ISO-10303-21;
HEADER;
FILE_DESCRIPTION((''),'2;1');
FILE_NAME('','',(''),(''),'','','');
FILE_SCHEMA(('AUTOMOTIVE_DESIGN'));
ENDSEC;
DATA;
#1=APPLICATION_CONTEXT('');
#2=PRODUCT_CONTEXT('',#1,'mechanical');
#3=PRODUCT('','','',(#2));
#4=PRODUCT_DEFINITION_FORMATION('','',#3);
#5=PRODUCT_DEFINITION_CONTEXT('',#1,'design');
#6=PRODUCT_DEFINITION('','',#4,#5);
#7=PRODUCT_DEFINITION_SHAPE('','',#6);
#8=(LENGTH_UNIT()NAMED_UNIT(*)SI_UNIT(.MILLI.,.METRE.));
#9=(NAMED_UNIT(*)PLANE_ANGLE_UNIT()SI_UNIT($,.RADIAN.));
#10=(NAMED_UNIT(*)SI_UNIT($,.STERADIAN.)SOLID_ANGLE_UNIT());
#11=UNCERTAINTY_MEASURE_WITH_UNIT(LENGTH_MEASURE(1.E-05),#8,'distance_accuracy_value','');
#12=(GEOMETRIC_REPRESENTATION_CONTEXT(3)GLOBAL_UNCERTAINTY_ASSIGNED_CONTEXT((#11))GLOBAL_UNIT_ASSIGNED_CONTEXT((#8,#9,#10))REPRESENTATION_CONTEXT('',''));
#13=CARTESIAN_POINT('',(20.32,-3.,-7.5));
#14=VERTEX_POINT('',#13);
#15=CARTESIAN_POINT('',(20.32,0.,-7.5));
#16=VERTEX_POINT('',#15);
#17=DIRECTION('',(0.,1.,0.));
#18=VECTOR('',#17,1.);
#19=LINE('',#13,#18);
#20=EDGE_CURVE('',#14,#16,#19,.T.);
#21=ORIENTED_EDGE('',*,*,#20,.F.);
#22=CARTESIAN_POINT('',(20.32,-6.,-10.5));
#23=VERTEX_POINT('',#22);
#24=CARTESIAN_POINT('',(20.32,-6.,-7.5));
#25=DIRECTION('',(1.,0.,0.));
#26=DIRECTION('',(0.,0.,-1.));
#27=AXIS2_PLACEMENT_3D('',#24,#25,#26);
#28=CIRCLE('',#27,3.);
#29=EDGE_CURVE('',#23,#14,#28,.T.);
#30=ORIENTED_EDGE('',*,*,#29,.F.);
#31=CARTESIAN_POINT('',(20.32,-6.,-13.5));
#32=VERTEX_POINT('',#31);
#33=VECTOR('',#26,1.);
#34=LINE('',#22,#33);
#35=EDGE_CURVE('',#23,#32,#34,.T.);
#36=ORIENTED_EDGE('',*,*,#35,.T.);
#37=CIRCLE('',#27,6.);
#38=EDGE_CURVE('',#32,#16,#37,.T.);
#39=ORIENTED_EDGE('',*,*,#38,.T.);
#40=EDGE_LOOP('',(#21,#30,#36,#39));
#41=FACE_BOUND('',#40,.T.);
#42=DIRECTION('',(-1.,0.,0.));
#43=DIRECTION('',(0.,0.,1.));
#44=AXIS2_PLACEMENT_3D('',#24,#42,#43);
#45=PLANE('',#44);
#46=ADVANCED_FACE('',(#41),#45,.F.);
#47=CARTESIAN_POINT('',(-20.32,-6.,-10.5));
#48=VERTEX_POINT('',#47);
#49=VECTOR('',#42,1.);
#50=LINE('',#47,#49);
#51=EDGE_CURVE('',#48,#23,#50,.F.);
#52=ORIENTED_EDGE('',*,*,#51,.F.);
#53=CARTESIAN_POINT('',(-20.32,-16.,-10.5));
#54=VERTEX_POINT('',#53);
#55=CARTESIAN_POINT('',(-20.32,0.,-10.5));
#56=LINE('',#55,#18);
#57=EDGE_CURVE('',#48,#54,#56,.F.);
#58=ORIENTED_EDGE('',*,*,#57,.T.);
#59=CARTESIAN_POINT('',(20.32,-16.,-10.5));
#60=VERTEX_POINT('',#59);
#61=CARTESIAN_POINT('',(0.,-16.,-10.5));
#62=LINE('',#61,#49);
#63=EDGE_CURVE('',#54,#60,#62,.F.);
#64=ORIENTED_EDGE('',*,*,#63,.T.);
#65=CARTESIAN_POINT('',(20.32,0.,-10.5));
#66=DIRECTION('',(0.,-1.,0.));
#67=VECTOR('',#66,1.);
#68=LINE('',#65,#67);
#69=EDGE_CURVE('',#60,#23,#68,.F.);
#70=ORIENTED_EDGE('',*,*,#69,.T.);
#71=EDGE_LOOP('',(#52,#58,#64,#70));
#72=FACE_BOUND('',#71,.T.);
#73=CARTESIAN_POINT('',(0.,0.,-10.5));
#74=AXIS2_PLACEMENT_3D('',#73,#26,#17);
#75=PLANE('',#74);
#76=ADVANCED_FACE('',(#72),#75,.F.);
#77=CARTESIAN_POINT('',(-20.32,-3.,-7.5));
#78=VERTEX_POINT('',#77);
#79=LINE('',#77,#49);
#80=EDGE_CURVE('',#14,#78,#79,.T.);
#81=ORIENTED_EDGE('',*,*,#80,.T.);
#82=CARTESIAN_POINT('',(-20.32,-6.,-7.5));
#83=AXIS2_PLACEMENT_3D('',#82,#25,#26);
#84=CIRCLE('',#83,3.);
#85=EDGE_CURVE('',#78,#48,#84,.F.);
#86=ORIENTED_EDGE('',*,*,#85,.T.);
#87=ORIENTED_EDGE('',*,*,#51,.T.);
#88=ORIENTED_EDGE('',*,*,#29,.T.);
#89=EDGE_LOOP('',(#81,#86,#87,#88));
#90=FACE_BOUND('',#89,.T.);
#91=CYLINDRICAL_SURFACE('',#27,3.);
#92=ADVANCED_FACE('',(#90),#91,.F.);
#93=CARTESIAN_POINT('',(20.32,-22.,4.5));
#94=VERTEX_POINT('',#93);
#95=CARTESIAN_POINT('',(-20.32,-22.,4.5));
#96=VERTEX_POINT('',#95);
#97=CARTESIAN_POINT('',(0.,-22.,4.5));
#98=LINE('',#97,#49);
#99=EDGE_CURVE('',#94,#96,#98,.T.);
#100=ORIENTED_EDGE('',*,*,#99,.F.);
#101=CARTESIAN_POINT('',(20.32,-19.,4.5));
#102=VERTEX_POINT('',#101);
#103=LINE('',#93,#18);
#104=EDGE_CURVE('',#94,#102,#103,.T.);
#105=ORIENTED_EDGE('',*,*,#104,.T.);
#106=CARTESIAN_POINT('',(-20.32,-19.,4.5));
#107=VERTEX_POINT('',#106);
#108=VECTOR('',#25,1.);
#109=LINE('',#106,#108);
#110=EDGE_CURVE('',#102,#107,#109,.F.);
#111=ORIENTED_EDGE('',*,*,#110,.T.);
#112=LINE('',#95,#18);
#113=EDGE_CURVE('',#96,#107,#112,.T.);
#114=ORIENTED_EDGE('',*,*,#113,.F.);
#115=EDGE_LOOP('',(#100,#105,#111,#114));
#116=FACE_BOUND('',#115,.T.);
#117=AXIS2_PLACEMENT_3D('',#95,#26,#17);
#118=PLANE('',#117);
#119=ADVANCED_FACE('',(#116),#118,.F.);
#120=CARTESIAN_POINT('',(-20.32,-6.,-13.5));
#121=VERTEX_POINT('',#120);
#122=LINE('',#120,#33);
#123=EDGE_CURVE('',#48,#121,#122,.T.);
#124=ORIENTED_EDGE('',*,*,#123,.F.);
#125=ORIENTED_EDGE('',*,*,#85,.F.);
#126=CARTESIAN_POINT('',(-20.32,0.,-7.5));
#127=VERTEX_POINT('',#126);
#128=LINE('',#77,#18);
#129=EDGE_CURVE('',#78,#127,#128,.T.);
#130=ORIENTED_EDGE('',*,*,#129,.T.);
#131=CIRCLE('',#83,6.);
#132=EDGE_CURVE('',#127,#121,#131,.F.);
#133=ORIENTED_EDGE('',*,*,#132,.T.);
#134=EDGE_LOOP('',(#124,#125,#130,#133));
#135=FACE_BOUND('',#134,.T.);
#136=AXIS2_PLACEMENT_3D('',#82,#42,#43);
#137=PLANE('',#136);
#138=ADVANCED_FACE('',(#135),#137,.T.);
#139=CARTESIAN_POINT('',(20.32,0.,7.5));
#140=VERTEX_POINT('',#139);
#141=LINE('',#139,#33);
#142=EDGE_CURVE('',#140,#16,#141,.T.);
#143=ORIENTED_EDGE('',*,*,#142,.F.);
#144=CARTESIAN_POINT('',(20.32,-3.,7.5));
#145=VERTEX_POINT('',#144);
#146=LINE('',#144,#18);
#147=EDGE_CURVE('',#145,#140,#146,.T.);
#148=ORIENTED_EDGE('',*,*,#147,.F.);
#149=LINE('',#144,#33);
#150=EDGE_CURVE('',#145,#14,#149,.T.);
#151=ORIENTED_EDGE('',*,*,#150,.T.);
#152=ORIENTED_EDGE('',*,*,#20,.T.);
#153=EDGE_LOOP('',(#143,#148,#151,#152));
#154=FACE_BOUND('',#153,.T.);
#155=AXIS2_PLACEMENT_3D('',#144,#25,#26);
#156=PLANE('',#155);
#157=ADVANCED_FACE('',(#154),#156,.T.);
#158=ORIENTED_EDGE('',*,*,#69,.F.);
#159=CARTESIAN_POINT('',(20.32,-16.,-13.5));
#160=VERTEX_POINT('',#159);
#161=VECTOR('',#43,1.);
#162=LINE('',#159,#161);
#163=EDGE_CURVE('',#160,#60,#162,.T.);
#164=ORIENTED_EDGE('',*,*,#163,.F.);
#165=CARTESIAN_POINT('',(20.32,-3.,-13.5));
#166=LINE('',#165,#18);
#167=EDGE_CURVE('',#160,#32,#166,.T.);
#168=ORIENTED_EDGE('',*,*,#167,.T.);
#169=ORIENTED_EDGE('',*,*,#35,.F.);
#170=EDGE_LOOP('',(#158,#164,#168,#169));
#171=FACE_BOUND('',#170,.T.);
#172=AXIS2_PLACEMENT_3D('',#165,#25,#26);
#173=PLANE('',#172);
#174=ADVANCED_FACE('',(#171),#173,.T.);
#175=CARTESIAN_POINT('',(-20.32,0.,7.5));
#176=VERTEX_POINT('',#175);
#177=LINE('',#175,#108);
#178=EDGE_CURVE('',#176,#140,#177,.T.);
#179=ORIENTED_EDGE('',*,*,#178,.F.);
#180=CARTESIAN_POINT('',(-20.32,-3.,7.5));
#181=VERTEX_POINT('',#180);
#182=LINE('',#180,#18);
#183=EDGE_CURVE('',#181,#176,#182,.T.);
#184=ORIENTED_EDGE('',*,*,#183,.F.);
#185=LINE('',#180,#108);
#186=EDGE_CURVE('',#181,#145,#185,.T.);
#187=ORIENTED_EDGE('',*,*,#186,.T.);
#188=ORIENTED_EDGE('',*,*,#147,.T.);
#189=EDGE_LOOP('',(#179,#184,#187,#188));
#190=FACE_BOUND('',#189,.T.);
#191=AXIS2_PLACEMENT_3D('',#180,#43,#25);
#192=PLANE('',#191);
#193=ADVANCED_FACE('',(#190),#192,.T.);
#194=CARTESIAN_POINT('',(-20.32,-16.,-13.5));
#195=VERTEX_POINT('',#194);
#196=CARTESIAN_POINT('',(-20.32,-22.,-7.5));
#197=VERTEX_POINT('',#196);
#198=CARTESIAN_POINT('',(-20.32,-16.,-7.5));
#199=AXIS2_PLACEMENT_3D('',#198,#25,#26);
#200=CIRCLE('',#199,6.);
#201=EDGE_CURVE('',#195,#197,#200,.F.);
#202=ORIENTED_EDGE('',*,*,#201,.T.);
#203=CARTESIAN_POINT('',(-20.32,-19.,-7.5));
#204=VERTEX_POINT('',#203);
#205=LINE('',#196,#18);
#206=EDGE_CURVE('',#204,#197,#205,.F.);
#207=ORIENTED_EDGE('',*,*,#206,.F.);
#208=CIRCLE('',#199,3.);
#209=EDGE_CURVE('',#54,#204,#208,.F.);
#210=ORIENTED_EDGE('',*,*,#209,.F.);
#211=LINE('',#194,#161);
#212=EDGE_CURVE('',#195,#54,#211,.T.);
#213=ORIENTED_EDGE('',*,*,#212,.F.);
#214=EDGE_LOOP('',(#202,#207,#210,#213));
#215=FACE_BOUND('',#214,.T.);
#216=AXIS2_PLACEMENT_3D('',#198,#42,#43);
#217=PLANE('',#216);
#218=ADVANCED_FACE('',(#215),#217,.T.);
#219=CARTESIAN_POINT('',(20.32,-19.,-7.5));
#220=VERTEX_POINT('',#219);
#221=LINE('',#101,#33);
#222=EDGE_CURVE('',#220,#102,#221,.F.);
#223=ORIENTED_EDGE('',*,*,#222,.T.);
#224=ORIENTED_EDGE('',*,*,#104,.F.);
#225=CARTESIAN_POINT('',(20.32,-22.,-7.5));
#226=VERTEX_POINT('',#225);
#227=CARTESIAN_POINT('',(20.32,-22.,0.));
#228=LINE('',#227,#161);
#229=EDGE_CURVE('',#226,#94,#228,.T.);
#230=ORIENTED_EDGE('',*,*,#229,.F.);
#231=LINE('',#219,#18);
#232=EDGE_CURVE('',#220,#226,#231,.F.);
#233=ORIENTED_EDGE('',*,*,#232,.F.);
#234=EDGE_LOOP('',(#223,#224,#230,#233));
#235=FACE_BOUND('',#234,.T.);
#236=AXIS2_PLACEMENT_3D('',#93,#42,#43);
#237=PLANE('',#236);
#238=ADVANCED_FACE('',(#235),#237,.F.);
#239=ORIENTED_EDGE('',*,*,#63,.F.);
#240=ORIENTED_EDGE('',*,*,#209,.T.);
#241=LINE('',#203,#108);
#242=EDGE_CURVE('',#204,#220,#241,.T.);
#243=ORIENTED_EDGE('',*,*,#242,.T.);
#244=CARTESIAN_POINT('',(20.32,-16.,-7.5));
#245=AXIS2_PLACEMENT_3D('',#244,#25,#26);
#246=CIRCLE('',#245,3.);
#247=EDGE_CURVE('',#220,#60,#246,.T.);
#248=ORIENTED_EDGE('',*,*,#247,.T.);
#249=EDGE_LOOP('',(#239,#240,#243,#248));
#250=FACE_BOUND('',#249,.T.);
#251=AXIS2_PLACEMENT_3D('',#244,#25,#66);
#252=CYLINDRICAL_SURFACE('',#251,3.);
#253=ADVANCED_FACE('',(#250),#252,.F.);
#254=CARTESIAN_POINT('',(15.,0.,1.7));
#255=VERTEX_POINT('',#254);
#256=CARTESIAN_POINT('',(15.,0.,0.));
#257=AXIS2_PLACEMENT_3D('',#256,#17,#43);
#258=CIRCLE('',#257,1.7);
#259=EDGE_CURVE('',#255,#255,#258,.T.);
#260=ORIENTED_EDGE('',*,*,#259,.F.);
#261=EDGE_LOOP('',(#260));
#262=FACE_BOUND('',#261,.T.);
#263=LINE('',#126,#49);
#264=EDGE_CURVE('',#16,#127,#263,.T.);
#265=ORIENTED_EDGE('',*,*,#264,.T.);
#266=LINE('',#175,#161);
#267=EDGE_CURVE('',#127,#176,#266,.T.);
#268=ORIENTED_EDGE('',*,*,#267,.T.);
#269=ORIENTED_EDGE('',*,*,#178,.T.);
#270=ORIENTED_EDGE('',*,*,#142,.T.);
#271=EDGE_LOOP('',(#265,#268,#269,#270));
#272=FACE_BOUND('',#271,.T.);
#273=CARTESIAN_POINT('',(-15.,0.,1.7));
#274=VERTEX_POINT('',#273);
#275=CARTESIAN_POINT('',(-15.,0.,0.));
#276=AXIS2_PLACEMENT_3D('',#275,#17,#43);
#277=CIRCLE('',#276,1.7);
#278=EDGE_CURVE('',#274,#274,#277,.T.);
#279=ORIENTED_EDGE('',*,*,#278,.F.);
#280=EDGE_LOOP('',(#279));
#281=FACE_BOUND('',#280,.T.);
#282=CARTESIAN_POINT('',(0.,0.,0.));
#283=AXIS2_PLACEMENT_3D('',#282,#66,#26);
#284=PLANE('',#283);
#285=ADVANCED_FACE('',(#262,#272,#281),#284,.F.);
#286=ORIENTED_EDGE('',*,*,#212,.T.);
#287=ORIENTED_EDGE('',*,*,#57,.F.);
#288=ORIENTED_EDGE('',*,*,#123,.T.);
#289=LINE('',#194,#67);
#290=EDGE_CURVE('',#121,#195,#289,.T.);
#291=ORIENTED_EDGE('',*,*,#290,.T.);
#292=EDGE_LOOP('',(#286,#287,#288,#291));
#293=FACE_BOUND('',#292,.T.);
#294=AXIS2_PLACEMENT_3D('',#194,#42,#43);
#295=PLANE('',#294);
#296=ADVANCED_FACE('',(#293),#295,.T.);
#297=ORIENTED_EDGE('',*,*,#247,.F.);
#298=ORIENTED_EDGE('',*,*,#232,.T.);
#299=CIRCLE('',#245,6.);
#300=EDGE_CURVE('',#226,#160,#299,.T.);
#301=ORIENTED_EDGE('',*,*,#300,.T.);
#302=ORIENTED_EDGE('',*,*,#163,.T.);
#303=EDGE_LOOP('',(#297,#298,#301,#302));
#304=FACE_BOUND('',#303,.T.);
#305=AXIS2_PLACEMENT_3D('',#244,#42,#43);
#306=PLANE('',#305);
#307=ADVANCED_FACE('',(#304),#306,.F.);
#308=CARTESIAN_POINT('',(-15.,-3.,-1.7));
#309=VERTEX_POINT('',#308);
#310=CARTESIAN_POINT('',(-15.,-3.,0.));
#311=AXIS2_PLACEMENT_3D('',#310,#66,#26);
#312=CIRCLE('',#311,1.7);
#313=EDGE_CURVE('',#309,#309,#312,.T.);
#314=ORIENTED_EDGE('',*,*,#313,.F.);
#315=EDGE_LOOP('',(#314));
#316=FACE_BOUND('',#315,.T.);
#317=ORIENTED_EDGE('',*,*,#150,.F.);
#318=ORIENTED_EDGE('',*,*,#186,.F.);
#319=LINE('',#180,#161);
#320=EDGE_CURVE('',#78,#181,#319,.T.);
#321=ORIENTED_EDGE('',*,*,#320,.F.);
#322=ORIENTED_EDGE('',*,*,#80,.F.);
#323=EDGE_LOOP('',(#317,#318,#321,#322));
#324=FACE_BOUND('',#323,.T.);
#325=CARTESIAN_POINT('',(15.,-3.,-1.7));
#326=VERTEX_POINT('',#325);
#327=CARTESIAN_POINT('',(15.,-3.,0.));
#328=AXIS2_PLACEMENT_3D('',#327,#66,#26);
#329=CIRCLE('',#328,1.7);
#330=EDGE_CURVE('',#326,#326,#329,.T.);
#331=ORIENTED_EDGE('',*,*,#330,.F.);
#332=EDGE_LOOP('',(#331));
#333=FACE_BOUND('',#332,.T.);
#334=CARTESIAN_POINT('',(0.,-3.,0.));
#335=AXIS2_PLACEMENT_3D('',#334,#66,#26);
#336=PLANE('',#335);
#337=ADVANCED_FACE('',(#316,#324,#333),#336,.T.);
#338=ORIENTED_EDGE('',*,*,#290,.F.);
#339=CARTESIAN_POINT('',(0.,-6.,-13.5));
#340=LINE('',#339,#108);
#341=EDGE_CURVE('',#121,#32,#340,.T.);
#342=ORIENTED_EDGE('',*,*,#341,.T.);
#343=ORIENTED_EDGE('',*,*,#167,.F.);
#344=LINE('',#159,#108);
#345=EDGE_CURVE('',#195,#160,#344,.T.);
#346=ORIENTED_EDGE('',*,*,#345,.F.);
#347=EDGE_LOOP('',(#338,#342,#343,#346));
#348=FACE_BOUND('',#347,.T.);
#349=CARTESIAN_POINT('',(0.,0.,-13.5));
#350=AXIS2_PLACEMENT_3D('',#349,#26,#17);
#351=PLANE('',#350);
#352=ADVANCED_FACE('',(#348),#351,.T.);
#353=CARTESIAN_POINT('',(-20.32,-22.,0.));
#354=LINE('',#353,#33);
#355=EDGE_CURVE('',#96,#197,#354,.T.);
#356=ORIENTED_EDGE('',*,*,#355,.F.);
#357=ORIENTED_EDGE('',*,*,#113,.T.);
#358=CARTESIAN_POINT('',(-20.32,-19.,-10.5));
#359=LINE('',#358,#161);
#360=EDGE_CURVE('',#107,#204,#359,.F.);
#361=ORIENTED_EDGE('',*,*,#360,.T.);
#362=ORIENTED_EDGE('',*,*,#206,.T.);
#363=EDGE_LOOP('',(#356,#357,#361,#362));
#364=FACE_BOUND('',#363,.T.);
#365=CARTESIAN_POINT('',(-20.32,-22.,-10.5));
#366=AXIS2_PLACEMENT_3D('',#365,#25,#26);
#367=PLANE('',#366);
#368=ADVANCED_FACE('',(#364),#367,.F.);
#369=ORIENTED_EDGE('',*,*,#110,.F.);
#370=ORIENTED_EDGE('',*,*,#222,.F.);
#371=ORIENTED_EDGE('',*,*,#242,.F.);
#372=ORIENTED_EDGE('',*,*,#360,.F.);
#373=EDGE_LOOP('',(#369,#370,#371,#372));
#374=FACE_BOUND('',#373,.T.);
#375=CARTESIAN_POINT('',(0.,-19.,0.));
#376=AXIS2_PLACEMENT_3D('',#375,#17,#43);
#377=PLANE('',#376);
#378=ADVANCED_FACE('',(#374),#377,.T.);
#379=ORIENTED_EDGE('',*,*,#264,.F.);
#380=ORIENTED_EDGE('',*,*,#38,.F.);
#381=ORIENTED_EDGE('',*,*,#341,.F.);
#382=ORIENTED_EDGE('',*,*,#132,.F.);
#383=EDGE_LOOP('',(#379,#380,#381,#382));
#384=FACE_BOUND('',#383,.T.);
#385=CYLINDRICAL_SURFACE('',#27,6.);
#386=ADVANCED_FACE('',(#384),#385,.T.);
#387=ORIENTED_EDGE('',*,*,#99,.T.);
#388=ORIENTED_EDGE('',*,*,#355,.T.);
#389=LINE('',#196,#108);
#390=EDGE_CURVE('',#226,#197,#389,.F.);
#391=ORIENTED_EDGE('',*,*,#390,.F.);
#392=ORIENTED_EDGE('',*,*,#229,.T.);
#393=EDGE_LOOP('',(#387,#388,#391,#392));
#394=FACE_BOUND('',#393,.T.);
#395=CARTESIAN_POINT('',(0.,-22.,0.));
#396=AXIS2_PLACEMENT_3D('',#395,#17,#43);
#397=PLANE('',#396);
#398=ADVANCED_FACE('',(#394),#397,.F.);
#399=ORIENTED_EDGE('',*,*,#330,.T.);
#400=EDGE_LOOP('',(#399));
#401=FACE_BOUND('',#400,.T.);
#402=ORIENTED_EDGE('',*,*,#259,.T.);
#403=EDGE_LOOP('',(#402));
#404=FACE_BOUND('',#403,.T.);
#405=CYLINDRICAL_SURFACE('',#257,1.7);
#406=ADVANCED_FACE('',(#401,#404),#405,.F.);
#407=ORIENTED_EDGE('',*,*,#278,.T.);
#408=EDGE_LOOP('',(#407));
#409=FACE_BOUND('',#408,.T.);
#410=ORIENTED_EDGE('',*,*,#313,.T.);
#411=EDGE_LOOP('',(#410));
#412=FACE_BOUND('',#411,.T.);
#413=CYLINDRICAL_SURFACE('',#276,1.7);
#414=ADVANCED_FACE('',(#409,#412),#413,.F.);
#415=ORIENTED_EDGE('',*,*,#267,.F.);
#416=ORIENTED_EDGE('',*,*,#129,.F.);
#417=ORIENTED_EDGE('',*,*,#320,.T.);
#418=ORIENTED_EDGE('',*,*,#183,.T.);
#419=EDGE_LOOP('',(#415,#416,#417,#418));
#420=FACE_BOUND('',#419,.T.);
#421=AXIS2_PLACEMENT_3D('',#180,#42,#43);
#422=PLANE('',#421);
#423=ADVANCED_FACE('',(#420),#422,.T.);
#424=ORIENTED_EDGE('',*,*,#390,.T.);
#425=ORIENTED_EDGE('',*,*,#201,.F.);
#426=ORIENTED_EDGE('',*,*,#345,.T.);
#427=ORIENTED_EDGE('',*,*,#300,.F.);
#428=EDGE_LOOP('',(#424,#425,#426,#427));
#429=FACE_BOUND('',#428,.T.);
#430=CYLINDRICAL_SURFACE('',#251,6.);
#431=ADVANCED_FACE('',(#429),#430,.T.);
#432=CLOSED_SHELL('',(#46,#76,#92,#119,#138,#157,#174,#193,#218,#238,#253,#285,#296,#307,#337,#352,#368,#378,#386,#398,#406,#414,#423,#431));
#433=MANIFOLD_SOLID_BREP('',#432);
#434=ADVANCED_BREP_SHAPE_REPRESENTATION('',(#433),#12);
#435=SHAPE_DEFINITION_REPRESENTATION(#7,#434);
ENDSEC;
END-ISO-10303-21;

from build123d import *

# Parameters (mm, degrees)
SKETCH2_W                = 40.64
SKETCH2_H                = 15
BASE_FLANGE1_DEPTH       = 3
EDGE_FLANGE1_DEPTH       = 40.64
EDGE_FLANGE2_DEPTH       = 40.64
M3_CLEARANCE_HOLE1_D     = 3.4
M3_CLEARANCE_HOLE1_DEPTH = 3


# Sheet-metal steps are written as plain solids
with BuildPart() as part:
    # Sketch2 → Base-Flange1 (new body)
    with BuildSketch(Plane(origin=(0, 0, 0), x_dir=(1, 0, 0), z_dir=(0, 1, 0))):
        Rectangle(SKETCH2_W, SKETCH2_H)
    extrude(amount=-BASE_FLANGE1_DEPTH)

    # Edge-Flange1 section (across the edge) → Edge-Flange1 (add)
    with BuildSketch(Plane(origin=(-20.32, -3, -10.5), x_dir=(0, 0, 1), z_dir=(1, 0, 0))):
        with BuildLine():
            Line((-3, 3), (-3, 13))
            Line((-3, 13), (0, 13))
            Line((0, 13), (0, 3))
            ThreePointArc((0, 3), (0.878679656, 0.878679656), (3, 0))
            Line((3, 0), (3, -3))
            ThreePointArc((3, -3), (-1.242640687, -1.242640687), (-3, 3))
        make_face()
    extrude(amount=EDGE_FLANGE1_DEPTH)

    # Edge-Flange2 section (across the edge) → Edge-Flange2 (add)
    with BuildSketch(Plane(origin=(-20.32, -19, -10.5), x_dir=(0, 1, 0), z_dir=(1, 0, 0))):
        with BuildLine():
            Line((-3, 3), (-3, 15))
            Line((-3, 15), (0, 15))
            Line((0, 15), (0, 3))
            ThreePointArc((0, 3), (0.878679656, 0.878679656), (3, 0))
            Line((3, 0), (3, -3))
            ThreePointArc((3, -3), (-1.242640687, -1.242640687), (-3, 3))
        make_face()
    extrude(amount=EDGE_FLANGE2_DEPTH)

    # M3 Clearance Hole1
    with Locations(Plane(origin=(0, 0, 0), x_dir=(1, 0, 0), z_dir=(0, 1, 0))):
        with Locations((-15, 0), (15, 0)):
            Hole(M3_CLEARANCE_HOLE1_D / 2, depth=M3_CLEARANCE_HOLE1_DEPTH)


solid = part.part
